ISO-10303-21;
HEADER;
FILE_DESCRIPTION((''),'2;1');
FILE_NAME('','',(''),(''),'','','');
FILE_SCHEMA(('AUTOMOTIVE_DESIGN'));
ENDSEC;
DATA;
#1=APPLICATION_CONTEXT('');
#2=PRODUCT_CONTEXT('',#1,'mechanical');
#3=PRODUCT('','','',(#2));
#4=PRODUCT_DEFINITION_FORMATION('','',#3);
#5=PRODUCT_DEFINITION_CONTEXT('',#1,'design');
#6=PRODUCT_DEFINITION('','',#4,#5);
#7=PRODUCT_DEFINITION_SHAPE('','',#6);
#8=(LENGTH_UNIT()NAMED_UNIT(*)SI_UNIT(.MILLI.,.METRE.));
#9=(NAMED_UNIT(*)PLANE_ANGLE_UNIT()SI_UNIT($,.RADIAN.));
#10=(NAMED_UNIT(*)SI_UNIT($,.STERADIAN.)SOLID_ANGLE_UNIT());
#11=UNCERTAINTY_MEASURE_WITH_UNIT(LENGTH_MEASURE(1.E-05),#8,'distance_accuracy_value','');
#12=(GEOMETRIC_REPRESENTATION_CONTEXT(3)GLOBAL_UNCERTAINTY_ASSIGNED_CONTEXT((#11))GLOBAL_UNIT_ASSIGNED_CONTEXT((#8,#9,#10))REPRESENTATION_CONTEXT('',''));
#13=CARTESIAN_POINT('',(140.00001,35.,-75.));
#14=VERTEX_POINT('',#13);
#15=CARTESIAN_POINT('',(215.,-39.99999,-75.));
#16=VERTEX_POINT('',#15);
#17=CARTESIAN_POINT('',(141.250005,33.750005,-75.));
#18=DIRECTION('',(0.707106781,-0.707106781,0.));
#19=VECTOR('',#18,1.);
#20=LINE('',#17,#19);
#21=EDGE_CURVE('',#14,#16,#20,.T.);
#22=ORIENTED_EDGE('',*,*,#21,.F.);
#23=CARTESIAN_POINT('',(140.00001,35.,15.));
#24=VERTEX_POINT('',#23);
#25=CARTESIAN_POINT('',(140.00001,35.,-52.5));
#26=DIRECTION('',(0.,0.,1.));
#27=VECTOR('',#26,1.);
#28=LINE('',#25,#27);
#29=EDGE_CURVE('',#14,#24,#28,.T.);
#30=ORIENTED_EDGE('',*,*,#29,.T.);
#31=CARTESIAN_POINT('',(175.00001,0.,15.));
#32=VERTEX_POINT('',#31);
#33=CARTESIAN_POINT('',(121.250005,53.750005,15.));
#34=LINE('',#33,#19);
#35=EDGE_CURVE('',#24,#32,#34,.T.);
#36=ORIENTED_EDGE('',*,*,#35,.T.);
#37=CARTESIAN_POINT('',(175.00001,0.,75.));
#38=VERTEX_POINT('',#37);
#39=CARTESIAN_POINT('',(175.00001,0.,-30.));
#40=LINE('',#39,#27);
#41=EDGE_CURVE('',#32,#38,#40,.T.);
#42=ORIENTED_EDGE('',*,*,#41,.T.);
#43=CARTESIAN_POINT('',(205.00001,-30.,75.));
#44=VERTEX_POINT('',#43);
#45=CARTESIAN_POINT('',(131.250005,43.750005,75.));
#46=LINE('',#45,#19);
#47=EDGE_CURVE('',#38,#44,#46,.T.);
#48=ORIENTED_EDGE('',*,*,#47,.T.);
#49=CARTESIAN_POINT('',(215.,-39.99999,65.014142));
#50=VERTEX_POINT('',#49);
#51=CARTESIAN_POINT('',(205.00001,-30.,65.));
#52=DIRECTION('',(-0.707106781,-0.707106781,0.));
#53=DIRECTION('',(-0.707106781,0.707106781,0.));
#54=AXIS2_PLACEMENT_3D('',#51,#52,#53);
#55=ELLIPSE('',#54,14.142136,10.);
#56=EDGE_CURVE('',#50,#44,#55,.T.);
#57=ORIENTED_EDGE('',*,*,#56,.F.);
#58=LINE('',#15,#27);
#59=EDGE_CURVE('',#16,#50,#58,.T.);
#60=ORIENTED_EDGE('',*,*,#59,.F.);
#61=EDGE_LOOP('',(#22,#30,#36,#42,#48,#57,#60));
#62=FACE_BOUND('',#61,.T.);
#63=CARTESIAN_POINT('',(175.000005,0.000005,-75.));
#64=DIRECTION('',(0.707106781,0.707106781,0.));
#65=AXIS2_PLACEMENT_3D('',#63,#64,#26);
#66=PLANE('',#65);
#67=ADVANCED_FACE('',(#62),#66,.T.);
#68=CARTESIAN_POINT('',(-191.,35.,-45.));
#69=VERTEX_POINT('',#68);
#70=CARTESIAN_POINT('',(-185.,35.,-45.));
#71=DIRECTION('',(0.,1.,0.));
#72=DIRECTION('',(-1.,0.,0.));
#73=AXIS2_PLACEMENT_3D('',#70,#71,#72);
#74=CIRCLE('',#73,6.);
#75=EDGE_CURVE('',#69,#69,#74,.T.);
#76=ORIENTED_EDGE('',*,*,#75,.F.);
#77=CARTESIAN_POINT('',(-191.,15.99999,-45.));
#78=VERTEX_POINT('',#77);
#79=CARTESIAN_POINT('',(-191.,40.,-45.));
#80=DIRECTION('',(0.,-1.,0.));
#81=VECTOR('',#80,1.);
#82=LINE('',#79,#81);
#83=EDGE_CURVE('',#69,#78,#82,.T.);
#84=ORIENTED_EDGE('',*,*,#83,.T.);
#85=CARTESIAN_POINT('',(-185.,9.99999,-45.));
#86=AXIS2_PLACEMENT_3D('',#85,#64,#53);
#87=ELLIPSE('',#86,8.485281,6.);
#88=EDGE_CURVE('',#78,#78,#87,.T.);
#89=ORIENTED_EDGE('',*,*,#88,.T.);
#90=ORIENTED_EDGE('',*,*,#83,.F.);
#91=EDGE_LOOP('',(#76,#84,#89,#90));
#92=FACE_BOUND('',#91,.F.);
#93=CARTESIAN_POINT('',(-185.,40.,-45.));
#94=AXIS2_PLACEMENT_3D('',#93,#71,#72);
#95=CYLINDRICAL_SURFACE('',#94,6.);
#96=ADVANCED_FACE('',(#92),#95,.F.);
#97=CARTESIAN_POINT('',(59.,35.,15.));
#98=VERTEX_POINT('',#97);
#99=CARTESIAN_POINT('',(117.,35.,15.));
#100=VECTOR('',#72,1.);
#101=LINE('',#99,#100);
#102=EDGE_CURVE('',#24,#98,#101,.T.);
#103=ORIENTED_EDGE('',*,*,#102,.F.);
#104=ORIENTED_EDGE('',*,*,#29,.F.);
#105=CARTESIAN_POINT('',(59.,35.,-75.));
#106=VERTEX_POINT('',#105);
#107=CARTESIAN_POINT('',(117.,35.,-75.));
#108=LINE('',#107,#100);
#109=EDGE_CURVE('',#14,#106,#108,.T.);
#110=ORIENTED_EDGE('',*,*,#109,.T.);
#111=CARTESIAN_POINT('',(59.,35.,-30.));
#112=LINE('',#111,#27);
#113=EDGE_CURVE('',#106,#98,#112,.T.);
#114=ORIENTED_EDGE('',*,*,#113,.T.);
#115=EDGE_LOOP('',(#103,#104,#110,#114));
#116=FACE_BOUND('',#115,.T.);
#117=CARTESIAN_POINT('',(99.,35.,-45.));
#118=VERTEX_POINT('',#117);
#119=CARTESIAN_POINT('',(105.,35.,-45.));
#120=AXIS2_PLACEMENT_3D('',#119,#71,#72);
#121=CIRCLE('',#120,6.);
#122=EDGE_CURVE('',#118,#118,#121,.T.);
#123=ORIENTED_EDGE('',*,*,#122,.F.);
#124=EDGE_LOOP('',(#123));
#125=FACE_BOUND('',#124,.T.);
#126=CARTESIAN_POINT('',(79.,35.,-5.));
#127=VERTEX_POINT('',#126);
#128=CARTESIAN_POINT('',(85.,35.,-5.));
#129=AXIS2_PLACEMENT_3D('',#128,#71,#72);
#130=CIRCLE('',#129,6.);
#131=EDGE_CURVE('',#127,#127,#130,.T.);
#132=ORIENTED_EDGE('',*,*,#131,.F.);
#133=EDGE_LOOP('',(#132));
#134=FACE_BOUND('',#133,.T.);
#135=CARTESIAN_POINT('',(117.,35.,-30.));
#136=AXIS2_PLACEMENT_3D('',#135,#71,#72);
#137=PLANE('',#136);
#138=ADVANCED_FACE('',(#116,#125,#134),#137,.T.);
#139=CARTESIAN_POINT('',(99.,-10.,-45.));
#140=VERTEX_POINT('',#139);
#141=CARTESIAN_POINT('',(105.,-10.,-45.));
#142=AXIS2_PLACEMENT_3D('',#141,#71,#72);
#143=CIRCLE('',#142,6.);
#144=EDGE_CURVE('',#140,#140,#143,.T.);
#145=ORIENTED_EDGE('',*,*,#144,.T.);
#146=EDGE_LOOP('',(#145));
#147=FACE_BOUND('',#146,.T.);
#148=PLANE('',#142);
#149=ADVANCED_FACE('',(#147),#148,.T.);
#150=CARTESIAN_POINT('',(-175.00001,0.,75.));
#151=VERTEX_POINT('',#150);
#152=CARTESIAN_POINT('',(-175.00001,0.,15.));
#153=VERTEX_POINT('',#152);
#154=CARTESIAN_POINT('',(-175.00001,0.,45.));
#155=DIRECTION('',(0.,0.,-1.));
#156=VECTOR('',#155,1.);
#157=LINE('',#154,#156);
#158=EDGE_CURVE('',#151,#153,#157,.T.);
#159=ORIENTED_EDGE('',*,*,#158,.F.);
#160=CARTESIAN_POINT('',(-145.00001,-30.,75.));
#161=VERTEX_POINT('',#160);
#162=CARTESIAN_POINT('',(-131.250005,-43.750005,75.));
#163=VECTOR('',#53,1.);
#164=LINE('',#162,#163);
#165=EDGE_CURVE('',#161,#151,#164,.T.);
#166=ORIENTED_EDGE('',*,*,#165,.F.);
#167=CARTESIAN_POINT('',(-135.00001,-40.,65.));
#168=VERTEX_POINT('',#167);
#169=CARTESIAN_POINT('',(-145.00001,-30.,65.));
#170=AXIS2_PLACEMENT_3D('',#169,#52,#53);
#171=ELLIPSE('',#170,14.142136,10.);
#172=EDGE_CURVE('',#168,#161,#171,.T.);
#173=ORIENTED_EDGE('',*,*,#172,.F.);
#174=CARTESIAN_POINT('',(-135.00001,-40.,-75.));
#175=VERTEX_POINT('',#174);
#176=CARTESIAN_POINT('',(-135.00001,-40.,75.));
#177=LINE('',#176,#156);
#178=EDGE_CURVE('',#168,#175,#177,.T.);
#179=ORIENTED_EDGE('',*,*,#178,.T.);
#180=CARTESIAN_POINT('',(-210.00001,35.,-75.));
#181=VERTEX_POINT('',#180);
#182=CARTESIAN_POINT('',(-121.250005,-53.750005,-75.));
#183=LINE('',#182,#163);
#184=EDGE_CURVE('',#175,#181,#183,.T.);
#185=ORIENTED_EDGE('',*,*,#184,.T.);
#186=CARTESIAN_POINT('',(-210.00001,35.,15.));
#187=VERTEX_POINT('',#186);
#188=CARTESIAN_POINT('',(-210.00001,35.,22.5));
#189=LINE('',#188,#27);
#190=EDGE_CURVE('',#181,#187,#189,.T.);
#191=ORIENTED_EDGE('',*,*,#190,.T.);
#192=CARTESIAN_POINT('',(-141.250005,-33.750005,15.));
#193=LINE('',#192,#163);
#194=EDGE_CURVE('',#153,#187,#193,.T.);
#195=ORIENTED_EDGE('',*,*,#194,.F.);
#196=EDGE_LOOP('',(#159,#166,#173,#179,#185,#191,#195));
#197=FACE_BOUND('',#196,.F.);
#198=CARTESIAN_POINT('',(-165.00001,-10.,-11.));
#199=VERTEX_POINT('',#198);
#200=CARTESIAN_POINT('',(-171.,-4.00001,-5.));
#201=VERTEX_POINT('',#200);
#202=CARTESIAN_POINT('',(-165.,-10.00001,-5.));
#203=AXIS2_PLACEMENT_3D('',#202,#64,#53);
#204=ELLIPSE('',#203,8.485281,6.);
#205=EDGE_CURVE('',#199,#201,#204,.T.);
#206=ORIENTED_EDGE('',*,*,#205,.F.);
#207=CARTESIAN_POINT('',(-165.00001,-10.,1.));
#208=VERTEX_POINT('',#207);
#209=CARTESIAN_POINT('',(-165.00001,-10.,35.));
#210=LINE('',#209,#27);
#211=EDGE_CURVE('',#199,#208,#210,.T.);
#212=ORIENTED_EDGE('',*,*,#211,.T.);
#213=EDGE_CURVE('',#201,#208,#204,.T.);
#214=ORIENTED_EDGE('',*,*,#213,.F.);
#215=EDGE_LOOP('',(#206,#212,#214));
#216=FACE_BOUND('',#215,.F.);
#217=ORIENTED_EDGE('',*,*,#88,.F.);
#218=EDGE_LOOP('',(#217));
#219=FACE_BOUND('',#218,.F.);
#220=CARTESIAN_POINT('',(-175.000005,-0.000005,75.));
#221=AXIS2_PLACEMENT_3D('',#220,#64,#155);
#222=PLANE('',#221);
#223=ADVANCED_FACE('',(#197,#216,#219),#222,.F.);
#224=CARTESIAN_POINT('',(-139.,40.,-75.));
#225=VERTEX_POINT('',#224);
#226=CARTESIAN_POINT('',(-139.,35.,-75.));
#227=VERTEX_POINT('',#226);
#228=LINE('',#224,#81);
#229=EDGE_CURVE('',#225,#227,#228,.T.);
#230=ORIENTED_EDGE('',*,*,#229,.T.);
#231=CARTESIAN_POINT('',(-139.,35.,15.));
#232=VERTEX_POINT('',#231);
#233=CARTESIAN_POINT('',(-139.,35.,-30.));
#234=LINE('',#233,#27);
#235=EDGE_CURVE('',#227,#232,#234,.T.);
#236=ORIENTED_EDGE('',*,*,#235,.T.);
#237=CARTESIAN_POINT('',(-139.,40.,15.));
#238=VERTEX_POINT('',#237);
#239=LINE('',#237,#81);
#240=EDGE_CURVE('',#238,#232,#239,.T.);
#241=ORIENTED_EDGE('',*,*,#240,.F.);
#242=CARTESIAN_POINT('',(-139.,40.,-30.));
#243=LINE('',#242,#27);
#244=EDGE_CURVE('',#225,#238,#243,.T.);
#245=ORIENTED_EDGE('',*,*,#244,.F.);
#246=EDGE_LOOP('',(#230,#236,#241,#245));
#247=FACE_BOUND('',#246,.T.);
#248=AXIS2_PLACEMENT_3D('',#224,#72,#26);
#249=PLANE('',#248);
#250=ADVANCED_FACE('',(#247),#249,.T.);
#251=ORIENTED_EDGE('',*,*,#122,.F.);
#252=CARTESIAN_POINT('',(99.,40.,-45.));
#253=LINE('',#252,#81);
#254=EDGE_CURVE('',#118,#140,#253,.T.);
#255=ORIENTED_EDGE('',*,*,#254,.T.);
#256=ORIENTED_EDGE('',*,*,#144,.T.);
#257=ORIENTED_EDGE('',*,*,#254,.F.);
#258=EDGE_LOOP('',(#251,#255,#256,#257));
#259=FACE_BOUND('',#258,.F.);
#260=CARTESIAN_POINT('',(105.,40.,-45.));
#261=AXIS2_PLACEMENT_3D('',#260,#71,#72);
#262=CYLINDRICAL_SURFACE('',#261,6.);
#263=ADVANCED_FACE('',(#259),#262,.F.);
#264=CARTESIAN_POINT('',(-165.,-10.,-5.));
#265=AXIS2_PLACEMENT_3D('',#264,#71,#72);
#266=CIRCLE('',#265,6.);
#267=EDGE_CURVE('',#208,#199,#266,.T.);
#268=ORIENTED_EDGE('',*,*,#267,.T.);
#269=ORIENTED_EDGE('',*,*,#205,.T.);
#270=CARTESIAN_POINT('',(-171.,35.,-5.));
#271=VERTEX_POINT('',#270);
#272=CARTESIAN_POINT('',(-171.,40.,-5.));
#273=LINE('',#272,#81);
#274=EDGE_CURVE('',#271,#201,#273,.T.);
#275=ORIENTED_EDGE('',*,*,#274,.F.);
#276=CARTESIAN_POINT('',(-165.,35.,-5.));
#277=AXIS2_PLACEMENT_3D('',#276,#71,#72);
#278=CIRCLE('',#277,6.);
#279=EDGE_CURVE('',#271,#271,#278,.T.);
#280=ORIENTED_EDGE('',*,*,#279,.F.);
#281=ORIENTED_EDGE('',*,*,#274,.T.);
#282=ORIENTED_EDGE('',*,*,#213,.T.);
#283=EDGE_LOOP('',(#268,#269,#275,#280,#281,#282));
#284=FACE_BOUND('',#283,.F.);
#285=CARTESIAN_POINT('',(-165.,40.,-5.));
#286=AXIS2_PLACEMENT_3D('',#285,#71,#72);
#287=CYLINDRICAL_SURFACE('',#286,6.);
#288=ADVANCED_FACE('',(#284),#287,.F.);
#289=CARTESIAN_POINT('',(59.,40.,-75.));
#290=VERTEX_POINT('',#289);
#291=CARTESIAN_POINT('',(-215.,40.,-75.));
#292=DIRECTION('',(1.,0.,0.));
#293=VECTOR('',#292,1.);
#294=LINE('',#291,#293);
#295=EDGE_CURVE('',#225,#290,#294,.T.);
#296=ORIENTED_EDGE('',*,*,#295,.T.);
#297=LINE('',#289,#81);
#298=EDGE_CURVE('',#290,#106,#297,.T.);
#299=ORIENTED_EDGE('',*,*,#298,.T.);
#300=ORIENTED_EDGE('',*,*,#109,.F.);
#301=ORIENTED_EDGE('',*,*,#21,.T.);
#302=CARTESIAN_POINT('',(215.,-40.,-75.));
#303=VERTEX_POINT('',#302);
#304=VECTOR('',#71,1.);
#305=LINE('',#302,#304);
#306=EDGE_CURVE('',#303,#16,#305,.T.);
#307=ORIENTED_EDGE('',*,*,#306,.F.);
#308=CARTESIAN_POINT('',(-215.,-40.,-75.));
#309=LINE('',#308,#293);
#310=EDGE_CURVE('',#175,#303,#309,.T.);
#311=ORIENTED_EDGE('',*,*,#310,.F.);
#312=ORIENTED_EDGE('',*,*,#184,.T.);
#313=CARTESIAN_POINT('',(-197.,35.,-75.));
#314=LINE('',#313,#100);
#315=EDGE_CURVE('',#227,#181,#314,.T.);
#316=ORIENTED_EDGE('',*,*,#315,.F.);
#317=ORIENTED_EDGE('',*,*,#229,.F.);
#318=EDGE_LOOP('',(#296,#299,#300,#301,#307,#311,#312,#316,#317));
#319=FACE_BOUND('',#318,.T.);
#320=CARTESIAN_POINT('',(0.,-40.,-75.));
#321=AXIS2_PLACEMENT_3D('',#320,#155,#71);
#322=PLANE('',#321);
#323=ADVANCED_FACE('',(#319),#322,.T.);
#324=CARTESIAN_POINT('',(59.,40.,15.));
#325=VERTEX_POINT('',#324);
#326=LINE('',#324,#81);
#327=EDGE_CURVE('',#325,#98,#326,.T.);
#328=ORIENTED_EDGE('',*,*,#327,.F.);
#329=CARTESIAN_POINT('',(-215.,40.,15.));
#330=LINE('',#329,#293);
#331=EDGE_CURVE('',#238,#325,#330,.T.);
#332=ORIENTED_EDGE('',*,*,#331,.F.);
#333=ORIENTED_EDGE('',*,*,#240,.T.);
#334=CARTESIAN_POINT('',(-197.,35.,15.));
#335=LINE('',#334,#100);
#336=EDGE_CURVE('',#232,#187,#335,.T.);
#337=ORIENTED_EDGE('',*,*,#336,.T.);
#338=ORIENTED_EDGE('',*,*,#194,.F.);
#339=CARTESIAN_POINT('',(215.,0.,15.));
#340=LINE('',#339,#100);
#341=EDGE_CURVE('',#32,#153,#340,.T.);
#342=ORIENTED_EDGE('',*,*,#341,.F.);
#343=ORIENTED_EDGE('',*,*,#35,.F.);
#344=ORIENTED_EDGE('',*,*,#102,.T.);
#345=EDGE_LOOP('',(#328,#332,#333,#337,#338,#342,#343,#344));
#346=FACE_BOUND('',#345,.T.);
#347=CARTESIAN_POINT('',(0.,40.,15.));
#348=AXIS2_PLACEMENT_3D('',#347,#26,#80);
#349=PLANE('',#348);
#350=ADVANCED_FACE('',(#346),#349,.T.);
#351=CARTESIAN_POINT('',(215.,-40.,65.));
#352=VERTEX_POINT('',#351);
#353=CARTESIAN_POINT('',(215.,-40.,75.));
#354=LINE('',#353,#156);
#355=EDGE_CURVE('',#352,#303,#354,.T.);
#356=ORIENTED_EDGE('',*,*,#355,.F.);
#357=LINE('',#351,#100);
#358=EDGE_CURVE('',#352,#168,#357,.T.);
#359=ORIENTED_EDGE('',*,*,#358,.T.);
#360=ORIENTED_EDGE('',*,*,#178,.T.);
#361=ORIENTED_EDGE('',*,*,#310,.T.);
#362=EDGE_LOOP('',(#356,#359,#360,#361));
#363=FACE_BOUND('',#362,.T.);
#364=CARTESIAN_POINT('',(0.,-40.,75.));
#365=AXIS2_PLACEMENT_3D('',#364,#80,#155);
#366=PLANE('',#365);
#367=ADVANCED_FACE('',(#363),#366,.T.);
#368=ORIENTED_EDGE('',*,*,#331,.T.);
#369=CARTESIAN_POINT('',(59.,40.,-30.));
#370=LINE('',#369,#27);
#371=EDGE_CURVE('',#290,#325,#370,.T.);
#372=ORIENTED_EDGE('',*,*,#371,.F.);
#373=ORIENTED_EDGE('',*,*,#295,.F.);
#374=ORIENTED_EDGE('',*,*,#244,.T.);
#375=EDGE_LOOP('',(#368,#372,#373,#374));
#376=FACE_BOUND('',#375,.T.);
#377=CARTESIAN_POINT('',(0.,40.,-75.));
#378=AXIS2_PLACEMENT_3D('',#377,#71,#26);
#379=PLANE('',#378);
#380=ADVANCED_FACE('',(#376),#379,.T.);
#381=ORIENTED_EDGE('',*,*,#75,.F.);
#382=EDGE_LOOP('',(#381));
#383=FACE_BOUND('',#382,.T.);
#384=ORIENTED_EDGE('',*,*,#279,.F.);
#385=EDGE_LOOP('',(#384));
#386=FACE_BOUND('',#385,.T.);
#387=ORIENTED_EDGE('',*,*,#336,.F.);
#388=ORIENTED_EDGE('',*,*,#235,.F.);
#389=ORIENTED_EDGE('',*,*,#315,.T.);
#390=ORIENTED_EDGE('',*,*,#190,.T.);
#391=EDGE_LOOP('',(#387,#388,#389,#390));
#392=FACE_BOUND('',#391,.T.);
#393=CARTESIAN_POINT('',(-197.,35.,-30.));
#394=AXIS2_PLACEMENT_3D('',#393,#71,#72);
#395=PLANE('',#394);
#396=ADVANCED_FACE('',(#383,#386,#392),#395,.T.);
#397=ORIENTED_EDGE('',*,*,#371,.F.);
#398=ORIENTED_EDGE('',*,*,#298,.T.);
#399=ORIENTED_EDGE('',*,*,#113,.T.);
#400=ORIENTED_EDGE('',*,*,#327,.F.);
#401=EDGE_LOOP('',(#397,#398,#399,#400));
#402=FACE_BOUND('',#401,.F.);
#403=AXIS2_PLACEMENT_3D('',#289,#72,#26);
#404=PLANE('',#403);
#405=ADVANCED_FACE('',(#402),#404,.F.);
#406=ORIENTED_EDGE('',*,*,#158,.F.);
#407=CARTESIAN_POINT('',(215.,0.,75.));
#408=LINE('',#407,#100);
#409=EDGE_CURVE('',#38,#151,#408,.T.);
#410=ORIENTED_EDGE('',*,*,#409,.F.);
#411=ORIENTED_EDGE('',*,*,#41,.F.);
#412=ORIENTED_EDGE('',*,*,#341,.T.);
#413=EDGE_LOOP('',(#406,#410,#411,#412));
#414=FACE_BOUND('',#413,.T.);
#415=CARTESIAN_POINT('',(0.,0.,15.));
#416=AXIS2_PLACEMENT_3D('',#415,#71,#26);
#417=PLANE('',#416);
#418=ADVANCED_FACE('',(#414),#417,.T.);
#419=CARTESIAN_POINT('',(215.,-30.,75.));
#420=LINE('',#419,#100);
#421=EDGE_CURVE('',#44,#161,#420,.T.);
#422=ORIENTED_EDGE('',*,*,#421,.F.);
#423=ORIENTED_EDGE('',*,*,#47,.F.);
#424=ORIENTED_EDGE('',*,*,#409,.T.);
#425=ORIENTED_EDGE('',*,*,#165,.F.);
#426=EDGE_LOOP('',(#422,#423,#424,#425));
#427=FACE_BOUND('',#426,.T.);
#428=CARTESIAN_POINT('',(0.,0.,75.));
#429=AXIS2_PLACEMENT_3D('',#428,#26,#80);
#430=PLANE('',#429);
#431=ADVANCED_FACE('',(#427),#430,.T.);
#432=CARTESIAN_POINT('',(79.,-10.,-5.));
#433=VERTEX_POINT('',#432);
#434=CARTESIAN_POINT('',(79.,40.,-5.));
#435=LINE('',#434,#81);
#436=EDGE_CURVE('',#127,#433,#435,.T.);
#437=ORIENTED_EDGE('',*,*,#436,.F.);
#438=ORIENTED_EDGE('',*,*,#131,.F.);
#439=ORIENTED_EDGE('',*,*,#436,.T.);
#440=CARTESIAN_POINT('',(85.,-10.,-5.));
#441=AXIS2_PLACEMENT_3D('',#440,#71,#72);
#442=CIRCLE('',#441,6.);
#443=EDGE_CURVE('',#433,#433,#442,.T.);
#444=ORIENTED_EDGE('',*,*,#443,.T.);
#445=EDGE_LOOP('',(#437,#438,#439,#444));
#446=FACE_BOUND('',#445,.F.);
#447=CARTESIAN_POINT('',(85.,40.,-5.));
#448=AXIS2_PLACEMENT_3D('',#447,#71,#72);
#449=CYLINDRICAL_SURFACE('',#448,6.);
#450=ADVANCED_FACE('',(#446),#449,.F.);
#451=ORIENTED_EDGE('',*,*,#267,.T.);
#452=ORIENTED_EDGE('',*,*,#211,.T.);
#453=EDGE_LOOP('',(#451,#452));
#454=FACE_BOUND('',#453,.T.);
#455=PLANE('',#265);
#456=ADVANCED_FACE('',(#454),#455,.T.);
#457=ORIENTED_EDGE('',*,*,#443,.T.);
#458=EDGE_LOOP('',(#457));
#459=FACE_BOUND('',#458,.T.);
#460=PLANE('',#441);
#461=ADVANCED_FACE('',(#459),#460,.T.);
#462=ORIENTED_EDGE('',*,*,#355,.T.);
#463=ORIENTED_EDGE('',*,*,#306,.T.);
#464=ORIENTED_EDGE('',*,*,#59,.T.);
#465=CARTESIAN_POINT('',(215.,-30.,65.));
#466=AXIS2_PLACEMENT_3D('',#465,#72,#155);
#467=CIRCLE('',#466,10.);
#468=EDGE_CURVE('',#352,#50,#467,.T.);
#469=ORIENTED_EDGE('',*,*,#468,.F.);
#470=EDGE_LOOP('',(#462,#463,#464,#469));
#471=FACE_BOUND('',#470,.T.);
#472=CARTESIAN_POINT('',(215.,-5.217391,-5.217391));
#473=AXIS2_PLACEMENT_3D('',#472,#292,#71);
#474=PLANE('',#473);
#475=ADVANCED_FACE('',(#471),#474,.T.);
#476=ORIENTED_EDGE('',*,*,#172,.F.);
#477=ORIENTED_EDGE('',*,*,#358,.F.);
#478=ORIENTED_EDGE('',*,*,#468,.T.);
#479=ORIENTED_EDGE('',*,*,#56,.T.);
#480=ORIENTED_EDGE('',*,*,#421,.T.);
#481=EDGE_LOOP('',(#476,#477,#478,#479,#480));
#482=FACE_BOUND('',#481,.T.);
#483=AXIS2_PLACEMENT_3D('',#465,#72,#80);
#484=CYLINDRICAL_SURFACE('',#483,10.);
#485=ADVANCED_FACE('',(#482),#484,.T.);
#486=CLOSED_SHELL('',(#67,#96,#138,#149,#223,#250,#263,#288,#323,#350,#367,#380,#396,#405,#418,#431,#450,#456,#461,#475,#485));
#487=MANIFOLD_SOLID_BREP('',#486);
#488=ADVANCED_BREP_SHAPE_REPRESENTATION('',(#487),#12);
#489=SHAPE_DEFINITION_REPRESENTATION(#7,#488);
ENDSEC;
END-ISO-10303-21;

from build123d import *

# Parameters (mm, degrees)
F3_DEPTH = 215
F4_SIZE  = 79.99999
F5_R     = 6
F6_DEPTH = 50
F7_W     = 116
F7_H     = 90
F8_DEPTH = 5
F9_R     = 10


# Not quite as in the source:
# - a fillet or chamfer is up to 0.001 mm smaller than in the source, because OpenCascade refuses the exact size


with BuildPart() as f3:
    # F2 (on Right) → F3 (new body, symmetric)
    with BuildSketch(Plane.YZ):
        Polygon((-40, 75), (-40, -75), (40, -75), (40, 15), (0, 15), (0, 75), align=None)
    extrude(amount=F3_DEPTH, both=True)

    # F4 (size 80 in the source; OpenCascade refuses exactly that, so slightly less here)
    f4_edges = [f3.edges().sort_by_distance(p)[0] for p in [
        (215, 40, -30),
        (-215, -40, 0),
    ]]
    chamfer(f4_edges, length=F4_SIZE)

    # F5 (on face) → F6 (cut)
    with BuildSketch(Plane(origin=(0, 40, 0), x_dir=(-1, 0, 0), z_dir=(0, 1, 0))):
        with Locations((-105, -45)):
            Circle(F5_R)
        with Locations((-85, -5)):
            Circle(F5_R)
        with Locations((165, -5)):
            Circle(F5_R)
        with Locations((185, -45)):
            Circle(F5_R)
    extrude(amount=-F6_DEPTH, mode=Mode.SUBTRACT)

    # F7 (on face) → F8 (cut)
    with BuildSketch(Plane(origin=(0, 40, 0), x_dir=(-1, 0, 0), z_dir=(0, 1, 0))):
        with Locations((-117, -30)):
            Rectangle(F7_W, F7_H)
        with Locations((197, -30)):
            Rectangle(F7_W, F7_H)
    extrude(amount=-F8_DEPTH, mode=Mode.SUBTRACT)

    # F9
    f9_edges = [f3.edges().sort_by_distance(p)[0] for p in [
        (39.999995, -40, 75),
    ]]
    fillet(f9_edges, radius=F9_R)


solid = f3.part
